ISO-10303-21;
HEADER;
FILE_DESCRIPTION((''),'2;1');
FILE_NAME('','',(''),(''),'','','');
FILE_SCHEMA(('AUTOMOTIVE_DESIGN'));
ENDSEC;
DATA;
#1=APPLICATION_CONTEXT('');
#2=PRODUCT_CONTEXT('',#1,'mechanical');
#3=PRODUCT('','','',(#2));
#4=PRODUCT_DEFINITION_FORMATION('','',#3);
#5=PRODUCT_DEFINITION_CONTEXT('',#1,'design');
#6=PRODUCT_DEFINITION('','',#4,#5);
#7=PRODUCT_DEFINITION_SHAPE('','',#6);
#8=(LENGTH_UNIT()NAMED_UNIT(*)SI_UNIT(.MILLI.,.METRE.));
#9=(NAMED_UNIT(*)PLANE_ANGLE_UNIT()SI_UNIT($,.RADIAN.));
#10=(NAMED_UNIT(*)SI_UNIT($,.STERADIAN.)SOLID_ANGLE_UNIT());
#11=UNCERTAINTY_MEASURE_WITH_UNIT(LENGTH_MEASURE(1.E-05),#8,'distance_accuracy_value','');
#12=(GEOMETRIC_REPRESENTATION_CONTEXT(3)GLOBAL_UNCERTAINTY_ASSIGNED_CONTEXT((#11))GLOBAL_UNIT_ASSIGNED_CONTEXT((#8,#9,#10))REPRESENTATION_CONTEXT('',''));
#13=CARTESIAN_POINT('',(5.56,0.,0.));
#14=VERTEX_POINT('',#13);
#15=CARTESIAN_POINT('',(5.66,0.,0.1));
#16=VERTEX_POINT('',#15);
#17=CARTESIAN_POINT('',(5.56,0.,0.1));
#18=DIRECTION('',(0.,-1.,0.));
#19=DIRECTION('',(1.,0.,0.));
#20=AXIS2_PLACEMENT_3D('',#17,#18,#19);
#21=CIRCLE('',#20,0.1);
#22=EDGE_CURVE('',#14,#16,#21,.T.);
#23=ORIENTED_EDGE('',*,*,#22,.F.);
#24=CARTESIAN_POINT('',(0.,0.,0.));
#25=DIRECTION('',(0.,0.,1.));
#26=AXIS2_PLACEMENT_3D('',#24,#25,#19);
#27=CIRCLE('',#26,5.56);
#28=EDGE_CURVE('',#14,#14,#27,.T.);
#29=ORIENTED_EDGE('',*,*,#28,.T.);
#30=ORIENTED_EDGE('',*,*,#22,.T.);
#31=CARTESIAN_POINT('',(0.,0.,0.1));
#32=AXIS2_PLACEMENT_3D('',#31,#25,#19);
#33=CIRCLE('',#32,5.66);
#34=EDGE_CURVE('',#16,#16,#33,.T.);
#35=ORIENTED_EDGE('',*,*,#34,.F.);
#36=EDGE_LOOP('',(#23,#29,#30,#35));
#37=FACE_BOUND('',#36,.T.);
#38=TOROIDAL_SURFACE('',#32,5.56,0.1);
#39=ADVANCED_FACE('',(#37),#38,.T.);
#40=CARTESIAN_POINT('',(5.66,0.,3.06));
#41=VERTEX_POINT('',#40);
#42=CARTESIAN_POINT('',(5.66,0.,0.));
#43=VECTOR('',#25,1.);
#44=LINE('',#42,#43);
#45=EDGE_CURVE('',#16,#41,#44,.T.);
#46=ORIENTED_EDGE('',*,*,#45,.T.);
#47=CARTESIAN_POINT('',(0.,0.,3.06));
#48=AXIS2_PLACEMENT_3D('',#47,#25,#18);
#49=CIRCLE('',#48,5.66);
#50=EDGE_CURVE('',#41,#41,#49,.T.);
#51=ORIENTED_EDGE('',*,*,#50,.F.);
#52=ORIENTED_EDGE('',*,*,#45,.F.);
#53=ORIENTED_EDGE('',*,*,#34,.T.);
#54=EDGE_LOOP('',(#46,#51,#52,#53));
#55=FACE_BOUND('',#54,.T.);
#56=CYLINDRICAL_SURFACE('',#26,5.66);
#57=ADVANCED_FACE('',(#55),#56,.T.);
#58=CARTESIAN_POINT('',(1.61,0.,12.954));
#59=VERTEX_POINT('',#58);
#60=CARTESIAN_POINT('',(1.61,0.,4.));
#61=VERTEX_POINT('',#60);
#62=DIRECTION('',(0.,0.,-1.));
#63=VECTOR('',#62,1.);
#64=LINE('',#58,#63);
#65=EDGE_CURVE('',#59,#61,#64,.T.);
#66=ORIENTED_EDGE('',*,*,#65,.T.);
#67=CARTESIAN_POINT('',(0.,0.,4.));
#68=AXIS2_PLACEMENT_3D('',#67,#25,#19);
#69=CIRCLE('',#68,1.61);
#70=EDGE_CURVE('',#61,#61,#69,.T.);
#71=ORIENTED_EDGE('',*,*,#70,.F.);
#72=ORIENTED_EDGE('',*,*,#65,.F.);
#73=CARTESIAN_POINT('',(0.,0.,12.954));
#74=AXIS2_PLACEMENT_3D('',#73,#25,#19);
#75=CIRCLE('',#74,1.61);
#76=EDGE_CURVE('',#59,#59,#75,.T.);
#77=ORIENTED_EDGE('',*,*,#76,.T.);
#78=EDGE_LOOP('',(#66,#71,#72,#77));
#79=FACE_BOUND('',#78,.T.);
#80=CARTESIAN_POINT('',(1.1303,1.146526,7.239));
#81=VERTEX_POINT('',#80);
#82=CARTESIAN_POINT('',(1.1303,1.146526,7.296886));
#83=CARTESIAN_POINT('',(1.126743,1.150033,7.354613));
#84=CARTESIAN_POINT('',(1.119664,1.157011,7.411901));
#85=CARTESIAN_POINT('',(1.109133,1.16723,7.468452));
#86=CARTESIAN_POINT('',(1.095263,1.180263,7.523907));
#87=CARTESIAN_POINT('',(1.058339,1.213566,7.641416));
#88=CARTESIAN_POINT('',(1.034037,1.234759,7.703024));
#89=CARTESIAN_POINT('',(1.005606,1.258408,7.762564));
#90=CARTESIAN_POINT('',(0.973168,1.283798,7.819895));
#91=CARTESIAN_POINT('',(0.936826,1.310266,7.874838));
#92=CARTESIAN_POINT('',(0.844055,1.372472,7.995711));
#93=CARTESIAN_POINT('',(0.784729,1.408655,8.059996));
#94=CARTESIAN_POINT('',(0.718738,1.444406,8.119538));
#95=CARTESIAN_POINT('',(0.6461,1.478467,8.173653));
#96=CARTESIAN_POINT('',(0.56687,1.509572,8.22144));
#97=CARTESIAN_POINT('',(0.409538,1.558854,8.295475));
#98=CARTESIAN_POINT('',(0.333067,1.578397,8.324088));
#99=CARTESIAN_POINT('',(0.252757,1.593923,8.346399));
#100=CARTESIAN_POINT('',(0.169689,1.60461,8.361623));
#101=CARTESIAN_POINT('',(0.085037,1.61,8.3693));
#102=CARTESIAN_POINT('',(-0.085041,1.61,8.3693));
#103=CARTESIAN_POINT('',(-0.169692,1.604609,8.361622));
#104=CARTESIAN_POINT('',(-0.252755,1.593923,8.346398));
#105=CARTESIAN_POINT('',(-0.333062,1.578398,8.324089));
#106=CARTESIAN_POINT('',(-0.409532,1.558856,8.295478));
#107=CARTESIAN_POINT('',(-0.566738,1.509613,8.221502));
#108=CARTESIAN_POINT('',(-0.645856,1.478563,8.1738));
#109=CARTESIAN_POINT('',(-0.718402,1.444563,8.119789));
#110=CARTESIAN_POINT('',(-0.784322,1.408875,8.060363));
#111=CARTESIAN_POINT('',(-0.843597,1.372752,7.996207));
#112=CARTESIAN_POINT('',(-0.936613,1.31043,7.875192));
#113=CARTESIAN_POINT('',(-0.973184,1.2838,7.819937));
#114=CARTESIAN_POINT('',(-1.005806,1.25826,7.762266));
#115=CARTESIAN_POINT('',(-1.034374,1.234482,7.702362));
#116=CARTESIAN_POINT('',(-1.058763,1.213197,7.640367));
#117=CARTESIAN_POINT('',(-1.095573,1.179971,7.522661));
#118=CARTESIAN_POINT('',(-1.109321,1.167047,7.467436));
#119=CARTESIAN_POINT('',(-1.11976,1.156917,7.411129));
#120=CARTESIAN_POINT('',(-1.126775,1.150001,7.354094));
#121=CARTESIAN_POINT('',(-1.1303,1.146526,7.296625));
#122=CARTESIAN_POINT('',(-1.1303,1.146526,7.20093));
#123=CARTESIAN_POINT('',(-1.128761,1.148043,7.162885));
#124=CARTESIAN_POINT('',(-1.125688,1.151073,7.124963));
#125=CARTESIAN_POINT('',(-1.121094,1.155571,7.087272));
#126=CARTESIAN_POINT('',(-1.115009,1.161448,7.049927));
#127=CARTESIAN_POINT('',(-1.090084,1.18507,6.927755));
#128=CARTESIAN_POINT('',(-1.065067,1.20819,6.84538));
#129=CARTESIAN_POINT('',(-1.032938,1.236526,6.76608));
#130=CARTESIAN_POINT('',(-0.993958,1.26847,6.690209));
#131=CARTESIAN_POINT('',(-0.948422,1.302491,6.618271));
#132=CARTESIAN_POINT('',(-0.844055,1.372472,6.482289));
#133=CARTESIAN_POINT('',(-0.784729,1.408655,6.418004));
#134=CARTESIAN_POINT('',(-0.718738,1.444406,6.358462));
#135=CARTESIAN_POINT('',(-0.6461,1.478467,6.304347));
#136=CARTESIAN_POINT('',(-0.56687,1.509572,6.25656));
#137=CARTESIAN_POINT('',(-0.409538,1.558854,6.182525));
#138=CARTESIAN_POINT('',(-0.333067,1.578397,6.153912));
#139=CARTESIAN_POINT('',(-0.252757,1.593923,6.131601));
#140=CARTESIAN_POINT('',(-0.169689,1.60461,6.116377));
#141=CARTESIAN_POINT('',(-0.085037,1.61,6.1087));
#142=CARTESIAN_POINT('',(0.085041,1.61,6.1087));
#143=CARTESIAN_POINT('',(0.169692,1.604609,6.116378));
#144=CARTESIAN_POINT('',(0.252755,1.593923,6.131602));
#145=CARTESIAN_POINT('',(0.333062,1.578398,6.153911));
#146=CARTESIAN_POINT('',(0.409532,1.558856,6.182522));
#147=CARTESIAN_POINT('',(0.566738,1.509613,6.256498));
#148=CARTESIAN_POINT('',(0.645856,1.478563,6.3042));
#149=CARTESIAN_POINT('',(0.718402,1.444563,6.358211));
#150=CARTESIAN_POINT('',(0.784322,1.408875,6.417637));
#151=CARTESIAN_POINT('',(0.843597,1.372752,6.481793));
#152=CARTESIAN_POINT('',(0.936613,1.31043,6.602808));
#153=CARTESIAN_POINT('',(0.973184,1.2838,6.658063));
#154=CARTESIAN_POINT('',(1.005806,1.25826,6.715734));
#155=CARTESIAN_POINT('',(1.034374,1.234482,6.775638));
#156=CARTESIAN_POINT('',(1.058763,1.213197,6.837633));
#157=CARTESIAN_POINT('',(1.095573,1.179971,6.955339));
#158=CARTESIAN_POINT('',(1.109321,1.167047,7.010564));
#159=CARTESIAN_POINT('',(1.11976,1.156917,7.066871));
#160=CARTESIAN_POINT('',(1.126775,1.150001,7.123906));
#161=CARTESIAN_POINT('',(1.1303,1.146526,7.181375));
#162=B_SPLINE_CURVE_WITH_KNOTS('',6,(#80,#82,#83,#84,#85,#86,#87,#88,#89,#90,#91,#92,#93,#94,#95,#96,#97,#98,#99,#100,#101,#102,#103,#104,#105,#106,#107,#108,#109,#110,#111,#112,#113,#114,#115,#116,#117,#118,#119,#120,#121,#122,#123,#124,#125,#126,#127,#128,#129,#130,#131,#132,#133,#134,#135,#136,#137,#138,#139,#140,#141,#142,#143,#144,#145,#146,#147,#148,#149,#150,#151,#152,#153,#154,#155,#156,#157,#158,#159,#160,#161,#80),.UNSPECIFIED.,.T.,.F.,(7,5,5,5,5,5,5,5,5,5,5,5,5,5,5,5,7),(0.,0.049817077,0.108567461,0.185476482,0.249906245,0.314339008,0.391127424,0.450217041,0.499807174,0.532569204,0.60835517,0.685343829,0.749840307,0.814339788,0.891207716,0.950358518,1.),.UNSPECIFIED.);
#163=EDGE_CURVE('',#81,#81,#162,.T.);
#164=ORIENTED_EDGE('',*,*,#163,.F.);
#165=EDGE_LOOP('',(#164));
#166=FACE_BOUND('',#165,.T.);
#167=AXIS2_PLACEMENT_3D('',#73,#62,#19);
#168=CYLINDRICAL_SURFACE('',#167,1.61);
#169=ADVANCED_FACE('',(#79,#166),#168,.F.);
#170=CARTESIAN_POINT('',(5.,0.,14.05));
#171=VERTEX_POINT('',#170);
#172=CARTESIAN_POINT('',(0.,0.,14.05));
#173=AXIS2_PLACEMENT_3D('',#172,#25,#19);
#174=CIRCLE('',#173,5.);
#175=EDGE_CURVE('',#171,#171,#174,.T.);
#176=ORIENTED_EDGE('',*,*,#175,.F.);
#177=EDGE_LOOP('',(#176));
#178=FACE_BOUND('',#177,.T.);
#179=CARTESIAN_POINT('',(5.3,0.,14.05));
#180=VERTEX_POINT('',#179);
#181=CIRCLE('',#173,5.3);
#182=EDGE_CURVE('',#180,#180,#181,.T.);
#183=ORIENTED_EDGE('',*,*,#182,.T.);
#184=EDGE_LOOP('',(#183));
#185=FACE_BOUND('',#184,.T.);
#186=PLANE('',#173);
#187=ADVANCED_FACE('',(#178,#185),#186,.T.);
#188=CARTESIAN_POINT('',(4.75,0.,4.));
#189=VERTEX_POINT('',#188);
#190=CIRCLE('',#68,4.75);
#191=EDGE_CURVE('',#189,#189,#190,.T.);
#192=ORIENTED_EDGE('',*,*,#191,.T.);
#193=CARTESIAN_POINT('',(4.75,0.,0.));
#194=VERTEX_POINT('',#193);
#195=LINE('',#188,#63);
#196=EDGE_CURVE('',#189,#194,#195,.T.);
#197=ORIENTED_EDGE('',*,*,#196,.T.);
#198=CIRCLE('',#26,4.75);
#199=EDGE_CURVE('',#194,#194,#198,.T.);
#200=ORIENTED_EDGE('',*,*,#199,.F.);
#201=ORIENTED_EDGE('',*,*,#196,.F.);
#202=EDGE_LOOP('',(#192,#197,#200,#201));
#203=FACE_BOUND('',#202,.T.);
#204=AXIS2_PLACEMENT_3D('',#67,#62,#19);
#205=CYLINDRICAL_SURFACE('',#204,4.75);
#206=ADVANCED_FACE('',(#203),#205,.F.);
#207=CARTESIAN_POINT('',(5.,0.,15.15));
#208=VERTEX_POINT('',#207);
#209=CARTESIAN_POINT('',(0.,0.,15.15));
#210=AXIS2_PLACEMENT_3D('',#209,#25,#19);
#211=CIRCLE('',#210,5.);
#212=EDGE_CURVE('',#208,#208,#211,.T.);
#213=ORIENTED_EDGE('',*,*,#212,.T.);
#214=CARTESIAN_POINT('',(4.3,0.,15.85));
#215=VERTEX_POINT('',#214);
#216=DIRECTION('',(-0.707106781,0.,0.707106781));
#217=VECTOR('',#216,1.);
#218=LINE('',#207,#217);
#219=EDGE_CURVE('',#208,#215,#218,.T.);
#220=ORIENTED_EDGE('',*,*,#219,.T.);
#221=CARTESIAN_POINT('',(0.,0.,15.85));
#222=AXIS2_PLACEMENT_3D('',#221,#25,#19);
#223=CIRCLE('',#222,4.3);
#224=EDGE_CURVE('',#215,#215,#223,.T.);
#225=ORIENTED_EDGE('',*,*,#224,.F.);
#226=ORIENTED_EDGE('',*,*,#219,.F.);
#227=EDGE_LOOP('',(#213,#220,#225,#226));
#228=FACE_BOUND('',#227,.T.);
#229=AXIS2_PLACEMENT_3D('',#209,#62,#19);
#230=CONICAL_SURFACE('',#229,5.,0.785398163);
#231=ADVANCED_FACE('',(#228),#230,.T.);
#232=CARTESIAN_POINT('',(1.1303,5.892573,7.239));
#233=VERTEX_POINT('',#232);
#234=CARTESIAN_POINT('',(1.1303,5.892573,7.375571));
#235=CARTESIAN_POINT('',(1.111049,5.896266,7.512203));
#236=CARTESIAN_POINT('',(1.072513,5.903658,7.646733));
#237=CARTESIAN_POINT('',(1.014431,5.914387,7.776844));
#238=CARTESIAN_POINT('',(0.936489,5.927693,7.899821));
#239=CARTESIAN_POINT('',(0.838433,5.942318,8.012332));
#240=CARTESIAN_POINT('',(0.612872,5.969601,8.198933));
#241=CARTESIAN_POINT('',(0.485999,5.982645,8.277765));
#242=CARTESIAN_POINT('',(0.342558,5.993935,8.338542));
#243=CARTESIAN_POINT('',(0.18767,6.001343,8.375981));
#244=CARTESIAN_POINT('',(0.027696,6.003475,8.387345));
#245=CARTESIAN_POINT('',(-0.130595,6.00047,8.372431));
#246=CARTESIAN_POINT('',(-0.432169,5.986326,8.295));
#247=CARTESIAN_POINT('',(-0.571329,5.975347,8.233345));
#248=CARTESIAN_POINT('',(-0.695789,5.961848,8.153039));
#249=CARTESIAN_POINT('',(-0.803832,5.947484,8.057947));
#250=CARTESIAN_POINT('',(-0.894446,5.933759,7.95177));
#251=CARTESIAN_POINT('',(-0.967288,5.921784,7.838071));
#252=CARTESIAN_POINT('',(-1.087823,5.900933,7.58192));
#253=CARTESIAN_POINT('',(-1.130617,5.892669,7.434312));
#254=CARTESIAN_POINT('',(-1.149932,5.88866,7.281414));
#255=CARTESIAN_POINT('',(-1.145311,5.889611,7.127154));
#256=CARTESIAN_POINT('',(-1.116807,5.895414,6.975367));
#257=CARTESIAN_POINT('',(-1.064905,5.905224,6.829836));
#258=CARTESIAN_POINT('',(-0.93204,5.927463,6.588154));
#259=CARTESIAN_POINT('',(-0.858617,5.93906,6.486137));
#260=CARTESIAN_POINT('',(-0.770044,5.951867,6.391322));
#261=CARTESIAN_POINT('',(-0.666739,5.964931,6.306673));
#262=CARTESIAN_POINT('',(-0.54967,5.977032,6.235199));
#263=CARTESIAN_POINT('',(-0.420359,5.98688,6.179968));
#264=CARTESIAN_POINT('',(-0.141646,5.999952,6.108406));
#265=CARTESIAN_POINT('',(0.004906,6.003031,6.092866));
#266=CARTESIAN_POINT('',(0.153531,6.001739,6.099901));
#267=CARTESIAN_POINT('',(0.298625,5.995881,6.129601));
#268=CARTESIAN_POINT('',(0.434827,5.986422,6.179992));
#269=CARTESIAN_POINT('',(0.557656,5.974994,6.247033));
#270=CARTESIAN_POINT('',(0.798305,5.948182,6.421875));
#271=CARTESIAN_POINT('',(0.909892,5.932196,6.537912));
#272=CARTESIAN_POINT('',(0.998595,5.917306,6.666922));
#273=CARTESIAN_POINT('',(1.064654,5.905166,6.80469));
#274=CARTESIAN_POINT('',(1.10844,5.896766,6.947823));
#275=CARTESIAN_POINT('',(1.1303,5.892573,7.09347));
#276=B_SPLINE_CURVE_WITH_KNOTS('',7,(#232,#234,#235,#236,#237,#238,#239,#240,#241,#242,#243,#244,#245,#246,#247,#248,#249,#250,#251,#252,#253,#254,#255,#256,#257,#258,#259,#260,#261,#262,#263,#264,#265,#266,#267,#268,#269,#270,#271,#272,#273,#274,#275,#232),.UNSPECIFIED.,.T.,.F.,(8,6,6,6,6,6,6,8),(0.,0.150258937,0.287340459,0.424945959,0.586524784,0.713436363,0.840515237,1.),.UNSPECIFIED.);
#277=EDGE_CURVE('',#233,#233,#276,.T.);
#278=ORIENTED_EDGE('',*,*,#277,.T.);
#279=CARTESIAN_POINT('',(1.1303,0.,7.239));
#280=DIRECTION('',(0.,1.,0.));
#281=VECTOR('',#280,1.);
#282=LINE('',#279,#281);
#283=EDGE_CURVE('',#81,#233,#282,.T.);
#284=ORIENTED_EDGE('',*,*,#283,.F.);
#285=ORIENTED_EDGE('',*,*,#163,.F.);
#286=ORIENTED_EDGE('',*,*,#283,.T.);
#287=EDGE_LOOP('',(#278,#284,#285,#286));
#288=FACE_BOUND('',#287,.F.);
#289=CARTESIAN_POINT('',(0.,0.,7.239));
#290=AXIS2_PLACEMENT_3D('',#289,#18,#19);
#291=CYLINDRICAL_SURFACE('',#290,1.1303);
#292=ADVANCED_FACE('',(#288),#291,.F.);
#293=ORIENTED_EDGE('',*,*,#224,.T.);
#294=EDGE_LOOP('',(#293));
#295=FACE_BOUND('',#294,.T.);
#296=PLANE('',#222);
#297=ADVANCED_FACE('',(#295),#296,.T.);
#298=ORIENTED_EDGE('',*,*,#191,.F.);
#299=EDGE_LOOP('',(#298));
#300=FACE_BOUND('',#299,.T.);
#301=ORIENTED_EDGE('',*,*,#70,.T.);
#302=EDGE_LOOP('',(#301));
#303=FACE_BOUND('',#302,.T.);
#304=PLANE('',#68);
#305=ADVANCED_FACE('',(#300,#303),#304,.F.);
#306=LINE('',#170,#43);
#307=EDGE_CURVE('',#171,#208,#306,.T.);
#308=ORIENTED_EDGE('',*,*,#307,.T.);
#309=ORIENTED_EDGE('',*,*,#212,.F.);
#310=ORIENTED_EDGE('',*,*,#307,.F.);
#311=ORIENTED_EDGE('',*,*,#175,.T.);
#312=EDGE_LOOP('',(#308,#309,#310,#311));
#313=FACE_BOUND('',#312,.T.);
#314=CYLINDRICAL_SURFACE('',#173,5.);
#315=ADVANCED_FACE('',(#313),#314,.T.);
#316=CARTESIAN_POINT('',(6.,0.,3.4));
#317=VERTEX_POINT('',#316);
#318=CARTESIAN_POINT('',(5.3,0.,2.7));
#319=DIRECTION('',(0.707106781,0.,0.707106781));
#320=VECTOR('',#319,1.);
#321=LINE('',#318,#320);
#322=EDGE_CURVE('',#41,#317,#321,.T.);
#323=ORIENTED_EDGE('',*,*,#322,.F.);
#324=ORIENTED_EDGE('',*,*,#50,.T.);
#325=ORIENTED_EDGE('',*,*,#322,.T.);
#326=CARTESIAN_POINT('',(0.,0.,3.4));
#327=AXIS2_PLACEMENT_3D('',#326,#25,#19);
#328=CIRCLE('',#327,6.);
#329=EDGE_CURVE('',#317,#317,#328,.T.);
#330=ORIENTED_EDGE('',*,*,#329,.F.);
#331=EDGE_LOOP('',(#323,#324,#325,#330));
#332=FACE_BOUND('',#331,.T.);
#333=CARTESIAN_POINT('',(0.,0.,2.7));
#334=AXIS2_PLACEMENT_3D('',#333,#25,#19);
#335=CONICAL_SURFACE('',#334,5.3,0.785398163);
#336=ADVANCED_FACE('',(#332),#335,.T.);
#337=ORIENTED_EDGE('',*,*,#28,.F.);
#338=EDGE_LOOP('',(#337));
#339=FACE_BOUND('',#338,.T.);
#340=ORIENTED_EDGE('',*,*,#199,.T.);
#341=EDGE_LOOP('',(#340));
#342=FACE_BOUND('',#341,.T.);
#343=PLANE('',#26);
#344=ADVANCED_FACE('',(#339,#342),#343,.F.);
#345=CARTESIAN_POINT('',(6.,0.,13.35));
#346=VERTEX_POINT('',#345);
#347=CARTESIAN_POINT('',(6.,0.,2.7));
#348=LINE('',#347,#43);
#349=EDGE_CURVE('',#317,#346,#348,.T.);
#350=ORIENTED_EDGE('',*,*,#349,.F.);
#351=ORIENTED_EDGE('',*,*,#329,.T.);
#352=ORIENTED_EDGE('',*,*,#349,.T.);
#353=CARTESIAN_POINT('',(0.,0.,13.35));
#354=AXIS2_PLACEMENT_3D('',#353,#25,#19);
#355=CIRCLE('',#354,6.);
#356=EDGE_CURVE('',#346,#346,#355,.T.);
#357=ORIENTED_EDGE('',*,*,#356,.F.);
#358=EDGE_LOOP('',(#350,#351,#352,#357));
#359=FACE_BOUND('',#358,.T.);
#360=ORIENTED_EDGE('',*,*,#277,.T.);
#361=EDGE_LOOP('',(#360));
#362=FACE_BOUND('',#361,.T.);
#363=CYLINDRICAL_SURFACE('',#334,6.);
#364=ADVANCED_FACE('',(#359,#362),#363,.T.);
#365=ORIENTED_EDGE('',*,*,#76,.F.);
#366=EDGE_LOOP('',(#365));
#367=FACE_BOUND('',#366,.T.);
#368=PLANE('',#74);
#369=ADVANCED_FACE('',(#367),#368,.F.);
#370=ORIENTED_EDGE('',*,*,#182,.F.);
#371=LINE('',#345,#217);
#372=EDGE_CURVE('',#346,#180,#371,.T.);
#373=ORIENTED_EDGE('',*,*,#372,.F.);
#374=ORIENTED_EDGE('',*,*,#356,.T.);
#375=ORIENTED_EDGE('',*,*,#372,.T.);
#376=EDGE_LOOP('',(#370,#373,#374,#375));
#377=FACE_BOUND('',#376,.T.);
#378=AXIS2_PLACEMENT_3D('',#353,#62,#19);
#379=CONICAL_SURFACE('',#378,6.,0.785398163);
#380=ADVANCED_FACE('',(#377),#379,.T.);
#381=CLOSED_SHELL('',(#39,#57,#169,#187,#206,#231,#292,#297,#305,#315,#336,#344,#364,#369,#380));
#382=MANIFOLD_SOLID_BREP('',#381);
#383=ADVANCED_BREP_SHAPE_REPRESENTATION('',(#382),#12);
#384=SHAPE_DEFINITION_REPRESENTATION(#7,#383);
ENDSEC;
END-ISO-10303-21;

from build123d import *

# Parameters (mm, degrees)
F2_S7_R     = 5.66
F2_T8_DEPTH = 10
F3_R        = 0.1
F4_D        = 2.2606
F4_DEPTH    = 6.001


# Not quite as in the source:
# - a fillet or chamfer that OpenCascade refuses, or shapes differently, is made with other operations: its cross-section is extruded or revolved along the edge and cut away or added


with BuildPart() as f1:
    # F0 (on Front) → F1 (revolve)
    with BuildSketch(Plane.XZ):
        Polygon((4.75, 4), (4.75, 0), (5.66, 0), (5.66, 2.7), (6, 2.7), (6, 14.05), (5, 14.05), (5, 15.85), (0, 15.85), (0, 12.954), (1.61, 12.954), (1.61, 4), align=None)
    revolve(axis=Axis((0, 0, 9.925), (0, 0, 1)))

    # F2: chamfer of 0.7 on 3 edges, made by hand

    # F2_s1 → F2_t2 (revolve, cut)
    with BuildSketch(Plane.XZ):
        Polygon((6, 13.35), (5.3, 14.05), (6, 14.05), align=None)
    revolve(axis=Axis((0, 0, 14.05), (0, 0, 1)), mode=Mode.SUBTRACT)


with BuildPart() as f2_tool4:
    # F2_s5 → F2_t6 (revolve)
    with BuildSketch(Plane.XZ):
        Polygon((5.3, 2.7), (6, 3.4), (6, 2.7), align=None)
    revolve(axis=Axis((0, 0, 2.7), (0, 0, 1)))

    # F2_s7 → F2_t8 (cut, symmetric)
    with BuildSketch(Plane.XY.offset(3.1)):
        Circle(F2_S7_R)
    extrude(amount=F2_T8_DEPTH, both=True, mode=Mode.SUBTRACT)


with BuildPart() as f1_1:
    add(f1.part)

    # F2_t3: cut F2_tool4
    add(f2_tool4.part, mode=Mode.SUBTRACT)

    # F2_s9 → F2_t10 (revolve, cut)
    with BuildSketch(Plane.XZ):
        Polygon((5, 15.15), (4.3, 15.85), (5, 15.85), align=None)
    revolve(axis=Axis((0, 0, 15.85), (0, 0, 1)), mode=Mode.SUBTRACT)

    # F3
    f3_edges = [f1_1.edges().sort_by_distance(p)[0] for p in [
        (-5.66, 0, 0),
    ]]
    fillet(f3_edges, radius=F3_R)

    # F4 (through all, one way)
    with BuildSketch(Plane.XZ):
        with Locations((0, 7.239)):
            Circle(F4_D / 2)
    extrude(amount=-F4_DEPTH, mode=Mode.SUBTRACT)


solid = f1_1.part
